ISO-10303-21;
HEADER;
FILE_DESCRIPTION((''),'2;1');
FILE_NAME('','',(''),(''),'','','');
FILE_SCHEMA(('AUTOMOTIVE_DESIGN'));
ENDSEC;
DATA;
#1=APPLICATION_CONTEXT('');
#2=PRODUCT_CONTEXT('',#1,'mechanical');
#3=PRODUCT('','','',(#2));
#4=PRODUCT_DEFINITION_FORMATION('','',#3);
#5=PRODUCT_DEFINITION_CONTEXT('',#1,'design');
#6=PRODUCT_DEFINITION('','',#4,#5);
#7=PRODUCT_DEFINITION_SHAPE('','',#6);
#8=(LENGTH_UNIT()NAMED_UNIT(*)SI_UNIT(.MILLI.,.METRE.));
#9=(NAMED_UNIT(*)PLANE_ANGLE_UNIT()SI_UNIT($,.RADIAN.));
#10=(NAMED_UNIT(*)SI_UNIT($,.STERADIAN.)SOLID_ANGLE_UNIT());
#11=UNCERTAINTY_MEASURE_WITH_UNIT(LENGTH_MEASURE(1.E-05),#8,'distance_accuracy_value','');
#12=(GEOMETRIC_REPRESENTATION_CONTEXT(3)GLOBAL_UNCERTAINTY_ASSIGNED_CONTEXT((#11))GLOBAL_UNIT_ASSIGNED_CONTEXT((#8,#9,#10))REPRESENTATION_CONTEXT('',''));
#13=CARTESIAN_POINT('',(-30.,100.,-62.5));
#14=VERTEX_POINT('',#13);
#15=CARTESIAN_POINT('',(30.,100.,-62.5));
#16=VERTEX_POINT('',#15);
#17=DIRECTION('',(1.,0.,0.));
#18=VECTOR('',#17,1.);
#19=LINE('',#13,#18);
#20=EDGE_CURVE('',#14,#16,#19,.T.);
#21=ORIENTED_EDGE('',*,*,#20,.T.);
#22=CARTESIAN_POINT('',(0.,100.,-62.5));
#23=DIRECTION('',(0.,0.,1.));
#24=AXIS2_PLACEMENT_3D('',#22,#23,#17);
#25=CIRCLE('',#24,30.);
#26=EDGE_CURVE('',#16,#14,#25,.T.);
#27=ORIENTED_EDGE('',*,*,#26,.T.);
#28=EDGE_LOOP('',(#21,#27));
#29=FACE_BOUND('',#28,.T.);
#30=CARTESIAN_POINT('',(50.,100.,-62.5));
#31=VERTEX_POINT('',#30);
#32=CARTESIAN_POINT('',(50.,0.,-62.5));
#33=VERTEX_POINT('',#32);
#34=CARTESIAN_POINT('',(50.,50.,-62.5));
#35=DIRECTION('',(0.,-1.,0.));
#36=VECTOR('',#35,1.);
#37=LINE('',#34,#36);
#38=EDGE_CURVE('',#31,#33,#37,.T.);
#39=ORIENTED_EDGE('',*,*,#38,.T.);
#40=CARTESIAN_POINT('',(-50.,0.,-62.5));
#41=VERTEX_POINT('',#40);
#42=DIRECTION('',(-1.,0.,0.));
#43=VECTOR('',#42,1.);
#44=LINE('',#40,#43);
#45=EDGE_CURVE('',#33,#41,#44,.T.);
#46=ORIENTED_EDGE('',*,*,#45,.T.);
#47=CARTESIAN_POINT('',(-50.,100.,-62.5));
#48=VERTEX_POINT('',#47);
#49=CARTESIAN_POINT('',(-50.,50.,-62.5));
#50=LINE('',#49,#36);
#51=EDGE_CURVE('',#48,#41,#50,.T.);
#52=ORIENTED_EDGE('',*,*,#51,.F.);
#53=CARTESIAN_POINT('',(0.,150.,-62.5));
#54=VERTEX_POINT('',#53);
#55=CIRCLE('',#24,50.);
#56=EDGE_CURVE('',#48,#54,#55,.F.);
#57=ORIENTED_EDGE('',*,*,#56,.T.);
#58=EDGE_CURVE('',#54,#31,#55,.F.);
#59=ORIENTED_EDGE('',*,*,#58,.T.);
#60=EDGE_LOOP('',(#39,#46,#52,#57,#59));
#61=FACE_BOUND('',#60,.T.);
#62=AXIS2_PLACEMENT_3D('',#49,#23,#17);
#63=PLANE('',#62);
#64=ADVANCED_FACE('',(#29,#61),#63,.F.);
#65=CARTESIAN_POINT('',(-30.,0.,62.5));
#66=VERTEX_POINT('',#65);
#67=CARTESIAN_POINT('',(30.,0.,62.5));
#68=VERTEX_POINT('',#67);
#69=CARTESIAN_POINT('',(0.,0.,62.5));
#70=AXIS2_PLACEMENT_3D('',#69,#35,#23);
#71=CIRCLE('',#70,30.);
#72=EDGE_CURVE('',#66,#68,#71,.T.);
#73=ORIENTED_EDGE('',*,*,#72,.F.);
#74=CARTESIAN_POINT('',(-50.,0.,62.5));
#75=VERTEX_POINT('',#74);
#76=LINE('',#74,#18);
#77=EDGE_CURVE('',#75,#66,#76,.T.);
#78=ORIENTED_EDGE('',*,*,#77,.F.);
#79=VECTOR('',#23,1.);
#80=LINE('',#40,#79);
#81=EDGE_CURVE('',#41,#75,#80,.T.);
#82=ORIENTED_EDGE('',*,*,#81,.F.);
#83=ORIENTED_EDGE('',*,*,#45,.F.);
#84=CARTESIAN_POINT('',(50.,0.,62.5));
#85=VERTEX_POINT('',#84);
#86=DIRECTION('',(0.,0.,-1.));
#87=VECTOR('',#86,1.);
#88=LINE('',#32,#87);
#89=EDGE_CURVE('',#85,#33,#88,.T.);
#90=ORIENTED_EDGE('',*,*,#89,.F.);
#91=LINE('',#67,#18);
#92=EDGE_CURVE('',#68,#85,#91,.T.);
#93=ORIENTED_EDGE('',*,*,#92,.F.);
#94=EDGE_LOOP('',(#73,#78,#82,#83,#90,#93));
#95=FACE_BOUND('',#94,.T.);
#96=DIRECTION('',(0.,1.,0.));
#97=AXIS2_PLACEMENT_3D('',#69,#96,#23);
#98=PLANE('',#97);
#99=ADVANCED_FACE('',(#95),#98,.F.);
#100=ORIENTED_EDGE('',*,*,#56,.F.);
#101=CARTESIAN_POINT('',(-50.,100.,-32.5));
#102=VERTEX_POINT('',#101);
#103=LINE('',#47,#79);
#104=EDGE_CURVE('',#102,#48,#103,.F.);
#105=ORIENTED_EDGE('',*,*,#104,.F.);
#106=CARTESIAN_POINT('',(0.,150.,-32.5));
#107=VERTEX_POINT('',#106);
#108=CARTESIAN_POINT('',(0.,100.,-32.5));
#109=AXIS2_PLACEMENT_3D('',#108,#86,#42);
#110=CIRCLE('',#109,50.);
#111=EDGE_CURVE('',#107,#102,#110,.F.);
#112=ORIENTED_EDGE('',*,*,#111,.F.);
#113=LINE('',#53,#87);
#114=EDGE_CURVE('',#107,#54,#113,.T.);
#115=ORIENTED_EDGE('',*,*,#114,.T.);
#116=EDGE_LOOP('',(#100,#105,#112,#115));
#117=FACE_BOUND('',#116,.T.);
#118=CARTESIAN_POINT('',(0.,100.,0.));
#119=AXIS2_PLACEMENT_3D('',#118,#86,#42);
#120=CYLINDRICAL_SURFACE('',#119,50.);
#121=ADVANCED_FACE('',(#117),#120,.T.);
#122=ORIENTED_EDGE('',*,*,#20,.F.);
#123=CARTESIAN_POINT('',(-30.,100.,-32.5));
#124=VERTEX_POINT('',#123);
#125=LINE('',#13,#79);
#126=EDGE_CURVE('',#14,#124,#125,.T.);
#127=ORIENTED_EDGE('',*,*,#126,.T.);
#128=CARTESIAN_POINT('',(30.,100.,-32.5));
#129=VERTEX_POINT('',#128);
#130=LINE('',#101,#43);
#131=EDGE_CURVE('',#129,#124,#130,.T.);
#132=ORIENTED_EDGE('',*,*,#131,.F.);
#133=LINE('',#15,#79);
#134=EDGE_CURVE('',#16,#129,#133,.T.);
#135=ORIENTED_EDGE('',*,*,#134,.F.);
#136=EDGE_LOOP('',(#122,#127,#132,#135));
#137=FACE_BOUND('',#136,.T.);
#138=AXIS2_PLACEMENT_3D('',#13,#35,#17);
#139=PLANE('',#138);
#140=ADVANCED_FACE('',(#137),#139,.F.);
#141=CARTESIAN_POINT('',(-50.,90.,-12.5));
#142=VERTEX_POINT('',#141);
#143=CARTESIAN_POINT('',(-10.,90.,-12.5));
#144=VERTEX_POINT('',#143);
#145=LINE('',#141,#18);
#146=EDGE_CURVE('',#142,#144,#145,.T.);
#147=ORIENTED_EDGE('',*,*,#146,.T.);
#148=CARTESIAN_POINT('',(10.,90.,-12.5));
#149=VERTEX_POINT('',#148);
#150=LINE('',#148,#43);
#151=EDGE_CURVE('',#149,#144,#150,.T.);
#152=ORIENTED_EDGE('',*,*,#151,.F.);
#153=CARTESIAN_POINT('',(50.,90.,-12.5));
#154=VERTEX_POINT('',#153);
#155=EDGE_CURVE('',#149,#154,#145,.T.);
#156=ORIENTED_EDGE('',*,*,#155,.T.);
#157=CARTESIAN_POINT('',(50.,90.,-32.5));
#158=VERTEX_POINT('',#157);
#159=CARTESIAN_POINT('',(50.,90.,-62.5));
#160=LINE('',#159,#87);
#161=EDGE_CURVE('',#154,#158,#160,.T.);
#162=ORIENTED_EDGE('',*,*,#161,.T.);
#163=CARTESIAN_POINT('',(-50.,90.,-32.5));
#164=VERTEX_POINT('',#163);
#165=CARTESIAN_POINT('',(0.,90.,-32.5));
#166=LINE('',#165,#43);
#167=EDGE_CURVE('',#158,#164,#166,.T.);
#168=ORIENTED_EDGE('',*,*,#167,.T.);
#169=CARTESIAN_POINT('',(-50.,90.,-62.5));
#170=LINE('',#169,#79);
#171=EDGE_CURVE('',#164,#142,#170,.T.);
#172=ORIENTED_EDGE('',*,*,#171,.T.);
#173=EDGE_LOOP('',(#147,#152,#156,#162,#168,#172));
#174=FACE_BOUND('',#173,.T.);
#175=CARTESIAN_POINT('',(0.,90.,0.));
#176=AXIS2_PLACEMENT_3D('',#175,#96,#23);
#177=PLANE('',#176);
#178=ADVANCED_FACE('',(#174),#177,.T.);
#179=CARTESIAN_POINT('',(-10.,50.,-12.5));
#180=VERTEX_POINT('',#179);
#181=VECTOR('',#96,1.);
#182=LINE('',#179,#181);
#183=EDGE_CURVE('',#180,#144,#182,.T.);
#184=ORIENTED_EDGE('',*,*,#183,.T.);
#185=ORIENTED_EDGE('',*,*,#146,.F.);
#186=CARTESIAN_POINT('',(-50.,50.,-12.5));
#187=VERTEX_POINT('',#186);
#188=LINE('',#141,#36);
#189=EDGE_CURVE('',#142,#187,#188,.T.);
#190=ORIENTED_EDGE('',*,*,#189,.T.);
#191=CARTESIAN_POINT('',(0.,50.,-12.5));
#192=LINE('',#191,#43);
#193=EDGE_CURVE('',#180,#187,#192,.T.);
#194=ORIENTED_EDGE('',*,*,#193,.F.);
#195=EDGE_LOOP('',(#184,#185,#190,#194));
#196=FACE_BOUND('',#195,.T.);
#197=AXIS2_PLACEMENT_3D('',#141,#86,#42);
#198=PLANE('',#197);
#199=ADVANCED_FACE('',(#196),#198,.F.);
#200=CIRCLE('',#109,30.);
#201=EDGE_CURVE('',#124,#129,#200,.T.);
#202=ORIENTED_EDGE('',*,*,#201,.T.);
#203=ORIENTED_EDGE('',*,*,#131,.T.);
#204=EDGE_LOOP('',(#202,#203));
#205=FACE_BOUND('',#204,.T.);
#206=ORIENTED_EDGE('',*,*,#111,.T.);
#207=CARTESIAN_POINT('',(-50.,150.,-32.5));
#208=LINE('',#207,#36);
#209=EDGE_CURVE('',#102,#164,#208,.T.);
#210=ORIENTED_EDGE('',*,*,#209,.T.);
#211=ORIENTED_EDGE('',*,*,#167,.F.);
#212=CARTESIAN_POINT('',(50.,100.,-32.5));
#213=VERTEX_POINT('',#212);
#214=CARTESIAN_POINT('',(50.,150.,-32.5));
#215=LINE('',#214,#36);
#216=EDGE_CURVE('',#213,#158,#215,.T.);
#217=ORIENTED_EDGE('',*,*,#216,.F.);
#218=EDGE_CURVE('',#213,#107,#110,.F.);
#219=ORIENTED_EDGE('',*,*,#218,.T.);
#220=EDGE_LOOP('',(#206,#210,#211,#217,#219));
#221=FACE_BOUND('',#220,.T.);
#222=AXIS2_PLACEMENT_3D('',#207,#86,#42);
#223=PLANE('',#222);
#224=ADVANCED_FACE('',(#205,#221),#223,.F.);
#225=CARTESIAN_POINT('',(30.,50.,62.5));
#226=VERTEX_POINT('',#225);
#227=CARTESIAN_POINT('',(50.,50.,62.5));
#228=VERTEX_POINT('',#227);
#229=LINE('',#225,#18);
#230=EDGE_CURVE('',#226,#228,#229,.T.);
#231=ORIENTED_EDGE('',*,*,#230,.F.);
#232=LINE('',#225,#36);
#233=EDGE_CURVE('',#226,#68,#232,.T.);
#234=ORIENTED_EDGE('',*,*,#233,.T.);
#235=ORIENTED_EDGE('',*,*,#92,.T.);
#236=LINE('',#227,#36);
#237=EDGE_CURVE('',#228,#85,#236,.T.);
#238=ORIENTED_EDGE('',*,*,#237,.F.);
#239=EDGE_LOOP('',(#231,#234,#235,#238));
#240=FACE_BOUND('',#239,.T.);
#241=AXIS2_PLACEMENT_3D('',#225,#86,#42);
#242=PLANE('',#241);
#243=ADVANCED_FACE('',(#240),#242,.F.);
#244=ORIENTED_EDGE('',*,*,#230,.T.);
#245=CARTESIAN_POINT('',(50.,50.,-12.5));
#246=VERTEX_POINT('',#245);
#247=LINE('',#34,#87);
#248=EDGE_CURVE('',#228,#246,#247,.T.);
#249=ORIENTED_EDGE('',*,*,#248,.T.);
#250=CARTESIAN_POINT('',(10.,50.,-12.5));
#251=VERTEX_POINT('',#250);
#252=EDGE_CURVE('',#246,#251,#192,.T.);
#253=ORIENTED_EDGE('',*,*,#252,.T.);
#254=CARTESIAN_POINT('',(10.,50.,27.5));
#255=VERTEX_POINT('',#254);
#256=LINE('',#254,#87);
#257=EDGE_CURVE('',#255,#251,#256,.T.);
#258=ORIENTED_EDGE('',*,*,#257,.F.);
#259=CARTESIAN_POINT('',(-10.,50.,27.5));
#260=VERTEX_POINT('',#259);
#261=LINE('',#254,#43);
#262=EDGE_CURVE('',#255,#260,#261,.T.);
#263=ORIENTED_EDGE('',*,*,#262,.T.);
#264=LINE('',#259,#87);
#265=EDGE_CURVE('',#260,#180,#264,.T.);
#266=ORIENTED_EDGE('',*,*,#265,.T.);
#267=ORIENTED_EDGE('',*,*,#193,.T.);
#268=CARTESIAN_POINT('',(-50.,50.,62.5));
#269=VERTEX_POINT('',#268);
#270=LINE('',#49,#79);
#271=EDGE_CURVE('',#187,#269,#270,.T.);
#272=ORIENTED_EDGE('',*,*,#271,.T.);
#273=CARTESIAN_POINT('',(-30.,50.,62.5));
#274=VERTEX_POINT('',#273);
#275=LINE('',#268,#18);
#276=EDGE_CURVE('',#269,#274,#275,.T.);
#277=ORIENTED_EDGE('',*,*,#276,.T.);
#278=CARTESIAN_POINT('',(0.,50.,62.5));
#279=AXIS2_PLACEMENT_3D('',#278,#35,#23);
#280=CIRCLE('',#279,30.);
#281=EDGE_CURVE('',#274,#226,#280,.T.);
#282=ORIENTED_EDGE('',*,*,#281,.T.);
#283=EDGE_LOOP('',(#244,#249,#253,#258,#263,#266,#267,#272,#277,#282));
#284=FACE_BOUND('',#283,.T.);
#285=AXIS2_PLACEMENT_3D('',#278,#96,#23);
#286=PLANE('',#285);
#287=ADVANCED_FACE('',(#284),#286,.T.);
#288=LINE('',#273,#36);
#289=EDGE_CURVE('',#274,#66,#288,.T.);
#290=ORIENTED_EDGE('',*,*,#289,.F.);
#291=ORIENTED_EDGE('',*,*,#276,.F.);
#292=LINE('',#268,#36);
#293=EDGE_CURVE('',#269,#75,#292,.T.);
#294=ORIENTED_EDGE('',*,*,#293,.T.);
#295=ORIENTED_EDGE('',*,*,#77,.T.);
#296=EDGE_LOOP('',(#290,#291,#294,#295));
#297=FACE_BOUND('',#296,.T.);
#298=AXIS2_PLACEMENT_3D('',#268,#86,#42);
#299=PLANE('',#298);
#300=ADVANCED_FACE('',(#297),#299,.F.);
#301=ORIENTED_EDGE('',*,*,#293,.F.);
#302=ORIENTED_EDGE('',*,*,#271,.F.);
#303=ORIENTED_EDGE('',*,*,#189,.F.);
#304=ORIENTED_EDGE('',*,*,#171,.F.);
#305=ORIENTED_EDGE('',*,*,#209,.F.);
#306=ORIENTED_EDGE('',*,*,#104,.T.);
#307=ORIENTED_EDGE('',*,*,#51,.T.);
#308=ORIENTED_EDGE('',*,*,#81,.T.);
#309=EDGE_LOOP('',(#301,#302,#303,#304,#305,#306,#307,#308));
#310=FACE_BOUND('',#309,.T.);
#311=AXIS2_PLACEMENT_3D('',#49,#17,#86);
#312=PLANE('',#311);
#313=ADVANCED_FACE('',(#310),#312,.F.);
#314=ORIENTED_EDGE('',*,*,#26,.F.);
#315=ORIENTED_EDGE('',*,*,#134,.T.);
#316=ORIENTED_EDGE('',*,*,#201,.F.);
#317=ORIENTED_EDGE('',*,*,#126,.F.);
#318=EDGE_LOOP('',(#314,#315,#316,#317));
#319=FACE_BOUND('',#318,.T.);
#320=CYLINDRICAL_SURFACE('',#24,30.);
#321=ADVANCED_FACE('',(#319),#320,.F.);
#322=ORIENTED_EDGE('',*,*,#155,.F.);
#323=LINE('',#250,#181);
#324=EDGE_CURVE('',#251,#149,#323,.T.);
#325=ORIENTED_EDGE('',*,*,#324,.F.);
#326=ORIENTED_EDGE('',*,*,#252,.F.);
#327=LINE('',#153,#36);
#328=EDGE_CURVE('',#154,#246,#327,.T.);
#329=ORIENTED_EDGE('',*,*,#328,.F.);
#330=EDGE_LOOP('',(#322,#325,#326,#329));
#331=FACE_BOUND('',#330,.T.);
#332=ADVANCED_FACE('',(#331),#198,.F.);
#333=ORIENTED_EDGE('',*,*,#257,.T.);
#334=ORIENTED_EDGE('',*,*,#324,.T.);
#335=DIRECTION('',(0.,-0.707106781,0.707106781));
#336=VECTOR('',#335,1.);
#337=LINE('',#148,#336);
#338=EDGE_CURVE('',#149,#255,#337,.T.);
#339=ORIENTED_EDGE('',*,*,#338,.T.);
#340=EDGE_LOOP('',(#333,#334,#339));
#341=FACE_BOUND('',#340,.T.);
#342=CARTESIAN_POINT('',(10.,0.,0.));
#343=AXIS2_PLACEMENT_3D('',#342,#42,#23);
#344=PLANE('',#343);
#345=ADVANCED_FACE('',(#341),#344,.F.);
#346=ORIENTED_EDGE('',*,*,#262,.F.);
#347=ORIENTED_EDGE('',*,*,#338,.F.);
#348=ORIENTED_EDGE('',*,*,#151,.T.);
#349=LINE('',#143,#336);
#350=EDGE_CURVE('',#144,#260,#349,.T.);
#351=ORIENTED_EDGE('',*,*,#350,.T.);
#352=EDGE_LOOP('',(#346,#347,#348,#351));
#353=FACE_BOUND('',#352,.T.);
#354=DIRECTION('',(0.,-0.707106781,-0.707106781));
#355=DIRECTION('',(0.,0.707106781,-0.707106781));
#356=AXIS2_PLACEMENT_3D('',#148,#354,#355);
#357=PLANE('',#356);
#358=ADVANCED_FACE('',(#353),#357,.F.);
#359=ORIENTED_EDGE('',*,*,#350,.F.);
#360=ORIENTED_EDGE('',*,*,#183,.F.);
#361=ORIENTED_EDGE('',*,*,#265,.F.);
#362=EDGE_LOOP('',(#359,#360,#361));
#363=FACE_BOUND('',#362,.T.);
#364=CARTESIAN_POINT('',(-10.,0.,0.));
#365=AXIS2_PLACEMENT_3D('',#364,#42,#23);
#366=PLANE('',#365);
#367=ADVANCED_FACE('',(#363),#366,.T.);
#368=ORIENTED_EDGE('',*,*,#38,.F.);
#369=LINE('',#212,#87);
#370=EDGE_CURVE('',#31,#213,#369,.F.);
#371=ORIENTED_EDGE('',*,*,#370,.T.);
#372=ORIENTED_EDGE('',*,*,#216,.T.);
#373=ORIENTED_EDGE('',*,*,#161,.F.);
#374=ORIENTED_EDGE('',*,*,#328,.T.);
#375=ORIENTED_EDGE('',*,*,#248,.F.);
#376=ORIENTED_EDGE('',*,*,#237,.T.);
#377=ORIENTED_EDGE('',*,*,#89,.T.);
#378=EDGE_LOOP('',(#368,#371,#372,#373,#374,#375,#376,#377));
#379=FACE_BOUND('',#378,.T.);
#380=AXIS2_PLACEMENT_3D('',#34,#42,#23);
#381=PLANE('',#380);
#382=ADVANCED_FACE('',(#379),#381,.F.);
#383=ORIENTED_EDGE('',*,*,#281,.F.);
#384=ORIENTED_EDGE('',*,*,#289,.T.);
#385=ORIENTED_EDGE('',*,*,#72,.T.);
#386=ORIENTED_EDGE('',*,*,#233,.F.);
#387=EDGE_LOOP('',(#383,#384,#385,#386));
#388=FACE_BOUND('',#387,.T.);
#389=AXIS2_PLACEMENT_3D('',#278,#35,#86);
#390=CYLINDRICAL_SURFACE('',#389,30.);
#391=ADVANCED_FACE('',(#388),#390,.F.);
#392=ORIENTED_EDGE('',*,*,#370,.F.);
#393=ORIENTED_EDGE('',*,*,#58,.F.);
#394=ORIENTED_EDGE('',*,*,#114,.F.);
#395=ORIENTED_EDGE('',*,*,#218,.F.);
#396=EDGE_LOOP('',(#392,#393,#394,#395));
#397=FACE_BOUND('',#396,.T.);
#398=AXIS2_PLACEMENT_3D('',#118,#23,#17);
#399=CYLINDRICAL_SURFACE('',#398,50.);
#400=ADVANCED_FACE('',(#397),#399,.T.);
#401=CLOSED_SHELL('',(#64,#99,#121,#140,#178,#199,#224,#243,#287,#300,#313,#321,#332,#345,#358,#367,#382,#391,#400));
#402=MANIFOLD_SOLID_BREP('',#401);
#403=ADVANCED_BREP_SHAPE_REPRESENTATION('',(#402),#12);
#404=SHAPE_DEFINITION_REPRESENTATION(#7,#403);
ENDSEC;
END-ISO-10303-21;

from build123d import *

# Parameters (mm, degrees)
BOSS_EXTRUDE1_DEPTH = 50
SKETCH2_W           = 100
SKETCH2_H           = 50
BOSS_EXTRUDE2_DEPTH = 90
SKETCH3_W           = 100
SKETCH3_H           = 30
BOSS_EXTRUDE3_DEPTH = 150
BOSS_EXTRUDE4_DEPTH = 10
FILLET1_R           = 50
CUT_EXTRUDE1_DEPTH  = 171.018381359


with BuildPart() as part:
    # Sketch1 → Boss-Extrude1 (new body)
    with BuildSketch(Plane(origin=(0, 0, 0), x_dir=(1, 0, 0), z_dir=(0, 1, 0))):
        with BuildLine():
            Line((30, -62.5), (50, -62.5))
            Line((50, -62.5), (50, 62.5))
            Line((50, 62.5), (-50, 62.5))
            Line((-50, 62.5), (-50, -62.5))
            Line((-50, -62.5), (-30, -62.5))
            ThreePointArc((-30, -62.5), (0, -32.5), (30, -62.5))
        make_face()
    extrude(amount=BOSS_EXTRUDE1_DEPTH)

    # Sketch2 → Boss-Extrude2 (add)
    with BuildSketch(Plane(origin=(0, 0, 0), x_dir=(1, 0, 0), z_dir=(0, 1, 0))):
        with Locations((0, 37.5)):
            Rectangle(SKETCH2_W, SKETCH2_H)
    extrude(amount=BOSS_EXTRUDE2_DEPTH)

    # Sketch3 → Boss-Extrude3 (add)
    with BuildSketch(Plane(origin=(0, 0, 0), x_dir=(1, 0, 0), z_dir=(0, 1, 0))):
        with Locations((0, 47.5)):
            Rectangle(SKETCH3_W, SKETCH3_H)
    extrude(amount=BOSS_EXTRUDE3_DEPTH)

    # Sketch4 → Boss-Extrude4 (add, symmetric)
    with BuildSketch(Plane(origin=(0, 0, 0), x_dir=(0, 0, -1), z_dir=(1, 0, 0))):
        Polygon((12.5, 90), (-27.5, 50), (12.5, 50), align=None)
    extrude(amount=BOSS_EXTRUDE4_DEPTH, both=True)

    # Fillet1
    fillet1_edges = [part.edges().sort_by_distance(p)[0] for p in [
        (-50, 150, -47.5),
        (50, 150, -47.5),
    ]]
    fillet(fillet1_edges, radius=FILLET1_R - 0.0001)  # a hair under: the kernel refuses the full size

    # Sketch6 → Cut-Extrude1 (cut, through all)
    with BuildSketch(Plane.XY):
        with BuildLine():
            Line((-30, 100), (30, 100))
            ThreePointArc((30, 100), (0, 130), (-30, 100))
        make_face()
    extrude(amount=-CUT_EXTRUDE1_DEPTH, mode=Mode.SUBTRACT)


solid = part.part
